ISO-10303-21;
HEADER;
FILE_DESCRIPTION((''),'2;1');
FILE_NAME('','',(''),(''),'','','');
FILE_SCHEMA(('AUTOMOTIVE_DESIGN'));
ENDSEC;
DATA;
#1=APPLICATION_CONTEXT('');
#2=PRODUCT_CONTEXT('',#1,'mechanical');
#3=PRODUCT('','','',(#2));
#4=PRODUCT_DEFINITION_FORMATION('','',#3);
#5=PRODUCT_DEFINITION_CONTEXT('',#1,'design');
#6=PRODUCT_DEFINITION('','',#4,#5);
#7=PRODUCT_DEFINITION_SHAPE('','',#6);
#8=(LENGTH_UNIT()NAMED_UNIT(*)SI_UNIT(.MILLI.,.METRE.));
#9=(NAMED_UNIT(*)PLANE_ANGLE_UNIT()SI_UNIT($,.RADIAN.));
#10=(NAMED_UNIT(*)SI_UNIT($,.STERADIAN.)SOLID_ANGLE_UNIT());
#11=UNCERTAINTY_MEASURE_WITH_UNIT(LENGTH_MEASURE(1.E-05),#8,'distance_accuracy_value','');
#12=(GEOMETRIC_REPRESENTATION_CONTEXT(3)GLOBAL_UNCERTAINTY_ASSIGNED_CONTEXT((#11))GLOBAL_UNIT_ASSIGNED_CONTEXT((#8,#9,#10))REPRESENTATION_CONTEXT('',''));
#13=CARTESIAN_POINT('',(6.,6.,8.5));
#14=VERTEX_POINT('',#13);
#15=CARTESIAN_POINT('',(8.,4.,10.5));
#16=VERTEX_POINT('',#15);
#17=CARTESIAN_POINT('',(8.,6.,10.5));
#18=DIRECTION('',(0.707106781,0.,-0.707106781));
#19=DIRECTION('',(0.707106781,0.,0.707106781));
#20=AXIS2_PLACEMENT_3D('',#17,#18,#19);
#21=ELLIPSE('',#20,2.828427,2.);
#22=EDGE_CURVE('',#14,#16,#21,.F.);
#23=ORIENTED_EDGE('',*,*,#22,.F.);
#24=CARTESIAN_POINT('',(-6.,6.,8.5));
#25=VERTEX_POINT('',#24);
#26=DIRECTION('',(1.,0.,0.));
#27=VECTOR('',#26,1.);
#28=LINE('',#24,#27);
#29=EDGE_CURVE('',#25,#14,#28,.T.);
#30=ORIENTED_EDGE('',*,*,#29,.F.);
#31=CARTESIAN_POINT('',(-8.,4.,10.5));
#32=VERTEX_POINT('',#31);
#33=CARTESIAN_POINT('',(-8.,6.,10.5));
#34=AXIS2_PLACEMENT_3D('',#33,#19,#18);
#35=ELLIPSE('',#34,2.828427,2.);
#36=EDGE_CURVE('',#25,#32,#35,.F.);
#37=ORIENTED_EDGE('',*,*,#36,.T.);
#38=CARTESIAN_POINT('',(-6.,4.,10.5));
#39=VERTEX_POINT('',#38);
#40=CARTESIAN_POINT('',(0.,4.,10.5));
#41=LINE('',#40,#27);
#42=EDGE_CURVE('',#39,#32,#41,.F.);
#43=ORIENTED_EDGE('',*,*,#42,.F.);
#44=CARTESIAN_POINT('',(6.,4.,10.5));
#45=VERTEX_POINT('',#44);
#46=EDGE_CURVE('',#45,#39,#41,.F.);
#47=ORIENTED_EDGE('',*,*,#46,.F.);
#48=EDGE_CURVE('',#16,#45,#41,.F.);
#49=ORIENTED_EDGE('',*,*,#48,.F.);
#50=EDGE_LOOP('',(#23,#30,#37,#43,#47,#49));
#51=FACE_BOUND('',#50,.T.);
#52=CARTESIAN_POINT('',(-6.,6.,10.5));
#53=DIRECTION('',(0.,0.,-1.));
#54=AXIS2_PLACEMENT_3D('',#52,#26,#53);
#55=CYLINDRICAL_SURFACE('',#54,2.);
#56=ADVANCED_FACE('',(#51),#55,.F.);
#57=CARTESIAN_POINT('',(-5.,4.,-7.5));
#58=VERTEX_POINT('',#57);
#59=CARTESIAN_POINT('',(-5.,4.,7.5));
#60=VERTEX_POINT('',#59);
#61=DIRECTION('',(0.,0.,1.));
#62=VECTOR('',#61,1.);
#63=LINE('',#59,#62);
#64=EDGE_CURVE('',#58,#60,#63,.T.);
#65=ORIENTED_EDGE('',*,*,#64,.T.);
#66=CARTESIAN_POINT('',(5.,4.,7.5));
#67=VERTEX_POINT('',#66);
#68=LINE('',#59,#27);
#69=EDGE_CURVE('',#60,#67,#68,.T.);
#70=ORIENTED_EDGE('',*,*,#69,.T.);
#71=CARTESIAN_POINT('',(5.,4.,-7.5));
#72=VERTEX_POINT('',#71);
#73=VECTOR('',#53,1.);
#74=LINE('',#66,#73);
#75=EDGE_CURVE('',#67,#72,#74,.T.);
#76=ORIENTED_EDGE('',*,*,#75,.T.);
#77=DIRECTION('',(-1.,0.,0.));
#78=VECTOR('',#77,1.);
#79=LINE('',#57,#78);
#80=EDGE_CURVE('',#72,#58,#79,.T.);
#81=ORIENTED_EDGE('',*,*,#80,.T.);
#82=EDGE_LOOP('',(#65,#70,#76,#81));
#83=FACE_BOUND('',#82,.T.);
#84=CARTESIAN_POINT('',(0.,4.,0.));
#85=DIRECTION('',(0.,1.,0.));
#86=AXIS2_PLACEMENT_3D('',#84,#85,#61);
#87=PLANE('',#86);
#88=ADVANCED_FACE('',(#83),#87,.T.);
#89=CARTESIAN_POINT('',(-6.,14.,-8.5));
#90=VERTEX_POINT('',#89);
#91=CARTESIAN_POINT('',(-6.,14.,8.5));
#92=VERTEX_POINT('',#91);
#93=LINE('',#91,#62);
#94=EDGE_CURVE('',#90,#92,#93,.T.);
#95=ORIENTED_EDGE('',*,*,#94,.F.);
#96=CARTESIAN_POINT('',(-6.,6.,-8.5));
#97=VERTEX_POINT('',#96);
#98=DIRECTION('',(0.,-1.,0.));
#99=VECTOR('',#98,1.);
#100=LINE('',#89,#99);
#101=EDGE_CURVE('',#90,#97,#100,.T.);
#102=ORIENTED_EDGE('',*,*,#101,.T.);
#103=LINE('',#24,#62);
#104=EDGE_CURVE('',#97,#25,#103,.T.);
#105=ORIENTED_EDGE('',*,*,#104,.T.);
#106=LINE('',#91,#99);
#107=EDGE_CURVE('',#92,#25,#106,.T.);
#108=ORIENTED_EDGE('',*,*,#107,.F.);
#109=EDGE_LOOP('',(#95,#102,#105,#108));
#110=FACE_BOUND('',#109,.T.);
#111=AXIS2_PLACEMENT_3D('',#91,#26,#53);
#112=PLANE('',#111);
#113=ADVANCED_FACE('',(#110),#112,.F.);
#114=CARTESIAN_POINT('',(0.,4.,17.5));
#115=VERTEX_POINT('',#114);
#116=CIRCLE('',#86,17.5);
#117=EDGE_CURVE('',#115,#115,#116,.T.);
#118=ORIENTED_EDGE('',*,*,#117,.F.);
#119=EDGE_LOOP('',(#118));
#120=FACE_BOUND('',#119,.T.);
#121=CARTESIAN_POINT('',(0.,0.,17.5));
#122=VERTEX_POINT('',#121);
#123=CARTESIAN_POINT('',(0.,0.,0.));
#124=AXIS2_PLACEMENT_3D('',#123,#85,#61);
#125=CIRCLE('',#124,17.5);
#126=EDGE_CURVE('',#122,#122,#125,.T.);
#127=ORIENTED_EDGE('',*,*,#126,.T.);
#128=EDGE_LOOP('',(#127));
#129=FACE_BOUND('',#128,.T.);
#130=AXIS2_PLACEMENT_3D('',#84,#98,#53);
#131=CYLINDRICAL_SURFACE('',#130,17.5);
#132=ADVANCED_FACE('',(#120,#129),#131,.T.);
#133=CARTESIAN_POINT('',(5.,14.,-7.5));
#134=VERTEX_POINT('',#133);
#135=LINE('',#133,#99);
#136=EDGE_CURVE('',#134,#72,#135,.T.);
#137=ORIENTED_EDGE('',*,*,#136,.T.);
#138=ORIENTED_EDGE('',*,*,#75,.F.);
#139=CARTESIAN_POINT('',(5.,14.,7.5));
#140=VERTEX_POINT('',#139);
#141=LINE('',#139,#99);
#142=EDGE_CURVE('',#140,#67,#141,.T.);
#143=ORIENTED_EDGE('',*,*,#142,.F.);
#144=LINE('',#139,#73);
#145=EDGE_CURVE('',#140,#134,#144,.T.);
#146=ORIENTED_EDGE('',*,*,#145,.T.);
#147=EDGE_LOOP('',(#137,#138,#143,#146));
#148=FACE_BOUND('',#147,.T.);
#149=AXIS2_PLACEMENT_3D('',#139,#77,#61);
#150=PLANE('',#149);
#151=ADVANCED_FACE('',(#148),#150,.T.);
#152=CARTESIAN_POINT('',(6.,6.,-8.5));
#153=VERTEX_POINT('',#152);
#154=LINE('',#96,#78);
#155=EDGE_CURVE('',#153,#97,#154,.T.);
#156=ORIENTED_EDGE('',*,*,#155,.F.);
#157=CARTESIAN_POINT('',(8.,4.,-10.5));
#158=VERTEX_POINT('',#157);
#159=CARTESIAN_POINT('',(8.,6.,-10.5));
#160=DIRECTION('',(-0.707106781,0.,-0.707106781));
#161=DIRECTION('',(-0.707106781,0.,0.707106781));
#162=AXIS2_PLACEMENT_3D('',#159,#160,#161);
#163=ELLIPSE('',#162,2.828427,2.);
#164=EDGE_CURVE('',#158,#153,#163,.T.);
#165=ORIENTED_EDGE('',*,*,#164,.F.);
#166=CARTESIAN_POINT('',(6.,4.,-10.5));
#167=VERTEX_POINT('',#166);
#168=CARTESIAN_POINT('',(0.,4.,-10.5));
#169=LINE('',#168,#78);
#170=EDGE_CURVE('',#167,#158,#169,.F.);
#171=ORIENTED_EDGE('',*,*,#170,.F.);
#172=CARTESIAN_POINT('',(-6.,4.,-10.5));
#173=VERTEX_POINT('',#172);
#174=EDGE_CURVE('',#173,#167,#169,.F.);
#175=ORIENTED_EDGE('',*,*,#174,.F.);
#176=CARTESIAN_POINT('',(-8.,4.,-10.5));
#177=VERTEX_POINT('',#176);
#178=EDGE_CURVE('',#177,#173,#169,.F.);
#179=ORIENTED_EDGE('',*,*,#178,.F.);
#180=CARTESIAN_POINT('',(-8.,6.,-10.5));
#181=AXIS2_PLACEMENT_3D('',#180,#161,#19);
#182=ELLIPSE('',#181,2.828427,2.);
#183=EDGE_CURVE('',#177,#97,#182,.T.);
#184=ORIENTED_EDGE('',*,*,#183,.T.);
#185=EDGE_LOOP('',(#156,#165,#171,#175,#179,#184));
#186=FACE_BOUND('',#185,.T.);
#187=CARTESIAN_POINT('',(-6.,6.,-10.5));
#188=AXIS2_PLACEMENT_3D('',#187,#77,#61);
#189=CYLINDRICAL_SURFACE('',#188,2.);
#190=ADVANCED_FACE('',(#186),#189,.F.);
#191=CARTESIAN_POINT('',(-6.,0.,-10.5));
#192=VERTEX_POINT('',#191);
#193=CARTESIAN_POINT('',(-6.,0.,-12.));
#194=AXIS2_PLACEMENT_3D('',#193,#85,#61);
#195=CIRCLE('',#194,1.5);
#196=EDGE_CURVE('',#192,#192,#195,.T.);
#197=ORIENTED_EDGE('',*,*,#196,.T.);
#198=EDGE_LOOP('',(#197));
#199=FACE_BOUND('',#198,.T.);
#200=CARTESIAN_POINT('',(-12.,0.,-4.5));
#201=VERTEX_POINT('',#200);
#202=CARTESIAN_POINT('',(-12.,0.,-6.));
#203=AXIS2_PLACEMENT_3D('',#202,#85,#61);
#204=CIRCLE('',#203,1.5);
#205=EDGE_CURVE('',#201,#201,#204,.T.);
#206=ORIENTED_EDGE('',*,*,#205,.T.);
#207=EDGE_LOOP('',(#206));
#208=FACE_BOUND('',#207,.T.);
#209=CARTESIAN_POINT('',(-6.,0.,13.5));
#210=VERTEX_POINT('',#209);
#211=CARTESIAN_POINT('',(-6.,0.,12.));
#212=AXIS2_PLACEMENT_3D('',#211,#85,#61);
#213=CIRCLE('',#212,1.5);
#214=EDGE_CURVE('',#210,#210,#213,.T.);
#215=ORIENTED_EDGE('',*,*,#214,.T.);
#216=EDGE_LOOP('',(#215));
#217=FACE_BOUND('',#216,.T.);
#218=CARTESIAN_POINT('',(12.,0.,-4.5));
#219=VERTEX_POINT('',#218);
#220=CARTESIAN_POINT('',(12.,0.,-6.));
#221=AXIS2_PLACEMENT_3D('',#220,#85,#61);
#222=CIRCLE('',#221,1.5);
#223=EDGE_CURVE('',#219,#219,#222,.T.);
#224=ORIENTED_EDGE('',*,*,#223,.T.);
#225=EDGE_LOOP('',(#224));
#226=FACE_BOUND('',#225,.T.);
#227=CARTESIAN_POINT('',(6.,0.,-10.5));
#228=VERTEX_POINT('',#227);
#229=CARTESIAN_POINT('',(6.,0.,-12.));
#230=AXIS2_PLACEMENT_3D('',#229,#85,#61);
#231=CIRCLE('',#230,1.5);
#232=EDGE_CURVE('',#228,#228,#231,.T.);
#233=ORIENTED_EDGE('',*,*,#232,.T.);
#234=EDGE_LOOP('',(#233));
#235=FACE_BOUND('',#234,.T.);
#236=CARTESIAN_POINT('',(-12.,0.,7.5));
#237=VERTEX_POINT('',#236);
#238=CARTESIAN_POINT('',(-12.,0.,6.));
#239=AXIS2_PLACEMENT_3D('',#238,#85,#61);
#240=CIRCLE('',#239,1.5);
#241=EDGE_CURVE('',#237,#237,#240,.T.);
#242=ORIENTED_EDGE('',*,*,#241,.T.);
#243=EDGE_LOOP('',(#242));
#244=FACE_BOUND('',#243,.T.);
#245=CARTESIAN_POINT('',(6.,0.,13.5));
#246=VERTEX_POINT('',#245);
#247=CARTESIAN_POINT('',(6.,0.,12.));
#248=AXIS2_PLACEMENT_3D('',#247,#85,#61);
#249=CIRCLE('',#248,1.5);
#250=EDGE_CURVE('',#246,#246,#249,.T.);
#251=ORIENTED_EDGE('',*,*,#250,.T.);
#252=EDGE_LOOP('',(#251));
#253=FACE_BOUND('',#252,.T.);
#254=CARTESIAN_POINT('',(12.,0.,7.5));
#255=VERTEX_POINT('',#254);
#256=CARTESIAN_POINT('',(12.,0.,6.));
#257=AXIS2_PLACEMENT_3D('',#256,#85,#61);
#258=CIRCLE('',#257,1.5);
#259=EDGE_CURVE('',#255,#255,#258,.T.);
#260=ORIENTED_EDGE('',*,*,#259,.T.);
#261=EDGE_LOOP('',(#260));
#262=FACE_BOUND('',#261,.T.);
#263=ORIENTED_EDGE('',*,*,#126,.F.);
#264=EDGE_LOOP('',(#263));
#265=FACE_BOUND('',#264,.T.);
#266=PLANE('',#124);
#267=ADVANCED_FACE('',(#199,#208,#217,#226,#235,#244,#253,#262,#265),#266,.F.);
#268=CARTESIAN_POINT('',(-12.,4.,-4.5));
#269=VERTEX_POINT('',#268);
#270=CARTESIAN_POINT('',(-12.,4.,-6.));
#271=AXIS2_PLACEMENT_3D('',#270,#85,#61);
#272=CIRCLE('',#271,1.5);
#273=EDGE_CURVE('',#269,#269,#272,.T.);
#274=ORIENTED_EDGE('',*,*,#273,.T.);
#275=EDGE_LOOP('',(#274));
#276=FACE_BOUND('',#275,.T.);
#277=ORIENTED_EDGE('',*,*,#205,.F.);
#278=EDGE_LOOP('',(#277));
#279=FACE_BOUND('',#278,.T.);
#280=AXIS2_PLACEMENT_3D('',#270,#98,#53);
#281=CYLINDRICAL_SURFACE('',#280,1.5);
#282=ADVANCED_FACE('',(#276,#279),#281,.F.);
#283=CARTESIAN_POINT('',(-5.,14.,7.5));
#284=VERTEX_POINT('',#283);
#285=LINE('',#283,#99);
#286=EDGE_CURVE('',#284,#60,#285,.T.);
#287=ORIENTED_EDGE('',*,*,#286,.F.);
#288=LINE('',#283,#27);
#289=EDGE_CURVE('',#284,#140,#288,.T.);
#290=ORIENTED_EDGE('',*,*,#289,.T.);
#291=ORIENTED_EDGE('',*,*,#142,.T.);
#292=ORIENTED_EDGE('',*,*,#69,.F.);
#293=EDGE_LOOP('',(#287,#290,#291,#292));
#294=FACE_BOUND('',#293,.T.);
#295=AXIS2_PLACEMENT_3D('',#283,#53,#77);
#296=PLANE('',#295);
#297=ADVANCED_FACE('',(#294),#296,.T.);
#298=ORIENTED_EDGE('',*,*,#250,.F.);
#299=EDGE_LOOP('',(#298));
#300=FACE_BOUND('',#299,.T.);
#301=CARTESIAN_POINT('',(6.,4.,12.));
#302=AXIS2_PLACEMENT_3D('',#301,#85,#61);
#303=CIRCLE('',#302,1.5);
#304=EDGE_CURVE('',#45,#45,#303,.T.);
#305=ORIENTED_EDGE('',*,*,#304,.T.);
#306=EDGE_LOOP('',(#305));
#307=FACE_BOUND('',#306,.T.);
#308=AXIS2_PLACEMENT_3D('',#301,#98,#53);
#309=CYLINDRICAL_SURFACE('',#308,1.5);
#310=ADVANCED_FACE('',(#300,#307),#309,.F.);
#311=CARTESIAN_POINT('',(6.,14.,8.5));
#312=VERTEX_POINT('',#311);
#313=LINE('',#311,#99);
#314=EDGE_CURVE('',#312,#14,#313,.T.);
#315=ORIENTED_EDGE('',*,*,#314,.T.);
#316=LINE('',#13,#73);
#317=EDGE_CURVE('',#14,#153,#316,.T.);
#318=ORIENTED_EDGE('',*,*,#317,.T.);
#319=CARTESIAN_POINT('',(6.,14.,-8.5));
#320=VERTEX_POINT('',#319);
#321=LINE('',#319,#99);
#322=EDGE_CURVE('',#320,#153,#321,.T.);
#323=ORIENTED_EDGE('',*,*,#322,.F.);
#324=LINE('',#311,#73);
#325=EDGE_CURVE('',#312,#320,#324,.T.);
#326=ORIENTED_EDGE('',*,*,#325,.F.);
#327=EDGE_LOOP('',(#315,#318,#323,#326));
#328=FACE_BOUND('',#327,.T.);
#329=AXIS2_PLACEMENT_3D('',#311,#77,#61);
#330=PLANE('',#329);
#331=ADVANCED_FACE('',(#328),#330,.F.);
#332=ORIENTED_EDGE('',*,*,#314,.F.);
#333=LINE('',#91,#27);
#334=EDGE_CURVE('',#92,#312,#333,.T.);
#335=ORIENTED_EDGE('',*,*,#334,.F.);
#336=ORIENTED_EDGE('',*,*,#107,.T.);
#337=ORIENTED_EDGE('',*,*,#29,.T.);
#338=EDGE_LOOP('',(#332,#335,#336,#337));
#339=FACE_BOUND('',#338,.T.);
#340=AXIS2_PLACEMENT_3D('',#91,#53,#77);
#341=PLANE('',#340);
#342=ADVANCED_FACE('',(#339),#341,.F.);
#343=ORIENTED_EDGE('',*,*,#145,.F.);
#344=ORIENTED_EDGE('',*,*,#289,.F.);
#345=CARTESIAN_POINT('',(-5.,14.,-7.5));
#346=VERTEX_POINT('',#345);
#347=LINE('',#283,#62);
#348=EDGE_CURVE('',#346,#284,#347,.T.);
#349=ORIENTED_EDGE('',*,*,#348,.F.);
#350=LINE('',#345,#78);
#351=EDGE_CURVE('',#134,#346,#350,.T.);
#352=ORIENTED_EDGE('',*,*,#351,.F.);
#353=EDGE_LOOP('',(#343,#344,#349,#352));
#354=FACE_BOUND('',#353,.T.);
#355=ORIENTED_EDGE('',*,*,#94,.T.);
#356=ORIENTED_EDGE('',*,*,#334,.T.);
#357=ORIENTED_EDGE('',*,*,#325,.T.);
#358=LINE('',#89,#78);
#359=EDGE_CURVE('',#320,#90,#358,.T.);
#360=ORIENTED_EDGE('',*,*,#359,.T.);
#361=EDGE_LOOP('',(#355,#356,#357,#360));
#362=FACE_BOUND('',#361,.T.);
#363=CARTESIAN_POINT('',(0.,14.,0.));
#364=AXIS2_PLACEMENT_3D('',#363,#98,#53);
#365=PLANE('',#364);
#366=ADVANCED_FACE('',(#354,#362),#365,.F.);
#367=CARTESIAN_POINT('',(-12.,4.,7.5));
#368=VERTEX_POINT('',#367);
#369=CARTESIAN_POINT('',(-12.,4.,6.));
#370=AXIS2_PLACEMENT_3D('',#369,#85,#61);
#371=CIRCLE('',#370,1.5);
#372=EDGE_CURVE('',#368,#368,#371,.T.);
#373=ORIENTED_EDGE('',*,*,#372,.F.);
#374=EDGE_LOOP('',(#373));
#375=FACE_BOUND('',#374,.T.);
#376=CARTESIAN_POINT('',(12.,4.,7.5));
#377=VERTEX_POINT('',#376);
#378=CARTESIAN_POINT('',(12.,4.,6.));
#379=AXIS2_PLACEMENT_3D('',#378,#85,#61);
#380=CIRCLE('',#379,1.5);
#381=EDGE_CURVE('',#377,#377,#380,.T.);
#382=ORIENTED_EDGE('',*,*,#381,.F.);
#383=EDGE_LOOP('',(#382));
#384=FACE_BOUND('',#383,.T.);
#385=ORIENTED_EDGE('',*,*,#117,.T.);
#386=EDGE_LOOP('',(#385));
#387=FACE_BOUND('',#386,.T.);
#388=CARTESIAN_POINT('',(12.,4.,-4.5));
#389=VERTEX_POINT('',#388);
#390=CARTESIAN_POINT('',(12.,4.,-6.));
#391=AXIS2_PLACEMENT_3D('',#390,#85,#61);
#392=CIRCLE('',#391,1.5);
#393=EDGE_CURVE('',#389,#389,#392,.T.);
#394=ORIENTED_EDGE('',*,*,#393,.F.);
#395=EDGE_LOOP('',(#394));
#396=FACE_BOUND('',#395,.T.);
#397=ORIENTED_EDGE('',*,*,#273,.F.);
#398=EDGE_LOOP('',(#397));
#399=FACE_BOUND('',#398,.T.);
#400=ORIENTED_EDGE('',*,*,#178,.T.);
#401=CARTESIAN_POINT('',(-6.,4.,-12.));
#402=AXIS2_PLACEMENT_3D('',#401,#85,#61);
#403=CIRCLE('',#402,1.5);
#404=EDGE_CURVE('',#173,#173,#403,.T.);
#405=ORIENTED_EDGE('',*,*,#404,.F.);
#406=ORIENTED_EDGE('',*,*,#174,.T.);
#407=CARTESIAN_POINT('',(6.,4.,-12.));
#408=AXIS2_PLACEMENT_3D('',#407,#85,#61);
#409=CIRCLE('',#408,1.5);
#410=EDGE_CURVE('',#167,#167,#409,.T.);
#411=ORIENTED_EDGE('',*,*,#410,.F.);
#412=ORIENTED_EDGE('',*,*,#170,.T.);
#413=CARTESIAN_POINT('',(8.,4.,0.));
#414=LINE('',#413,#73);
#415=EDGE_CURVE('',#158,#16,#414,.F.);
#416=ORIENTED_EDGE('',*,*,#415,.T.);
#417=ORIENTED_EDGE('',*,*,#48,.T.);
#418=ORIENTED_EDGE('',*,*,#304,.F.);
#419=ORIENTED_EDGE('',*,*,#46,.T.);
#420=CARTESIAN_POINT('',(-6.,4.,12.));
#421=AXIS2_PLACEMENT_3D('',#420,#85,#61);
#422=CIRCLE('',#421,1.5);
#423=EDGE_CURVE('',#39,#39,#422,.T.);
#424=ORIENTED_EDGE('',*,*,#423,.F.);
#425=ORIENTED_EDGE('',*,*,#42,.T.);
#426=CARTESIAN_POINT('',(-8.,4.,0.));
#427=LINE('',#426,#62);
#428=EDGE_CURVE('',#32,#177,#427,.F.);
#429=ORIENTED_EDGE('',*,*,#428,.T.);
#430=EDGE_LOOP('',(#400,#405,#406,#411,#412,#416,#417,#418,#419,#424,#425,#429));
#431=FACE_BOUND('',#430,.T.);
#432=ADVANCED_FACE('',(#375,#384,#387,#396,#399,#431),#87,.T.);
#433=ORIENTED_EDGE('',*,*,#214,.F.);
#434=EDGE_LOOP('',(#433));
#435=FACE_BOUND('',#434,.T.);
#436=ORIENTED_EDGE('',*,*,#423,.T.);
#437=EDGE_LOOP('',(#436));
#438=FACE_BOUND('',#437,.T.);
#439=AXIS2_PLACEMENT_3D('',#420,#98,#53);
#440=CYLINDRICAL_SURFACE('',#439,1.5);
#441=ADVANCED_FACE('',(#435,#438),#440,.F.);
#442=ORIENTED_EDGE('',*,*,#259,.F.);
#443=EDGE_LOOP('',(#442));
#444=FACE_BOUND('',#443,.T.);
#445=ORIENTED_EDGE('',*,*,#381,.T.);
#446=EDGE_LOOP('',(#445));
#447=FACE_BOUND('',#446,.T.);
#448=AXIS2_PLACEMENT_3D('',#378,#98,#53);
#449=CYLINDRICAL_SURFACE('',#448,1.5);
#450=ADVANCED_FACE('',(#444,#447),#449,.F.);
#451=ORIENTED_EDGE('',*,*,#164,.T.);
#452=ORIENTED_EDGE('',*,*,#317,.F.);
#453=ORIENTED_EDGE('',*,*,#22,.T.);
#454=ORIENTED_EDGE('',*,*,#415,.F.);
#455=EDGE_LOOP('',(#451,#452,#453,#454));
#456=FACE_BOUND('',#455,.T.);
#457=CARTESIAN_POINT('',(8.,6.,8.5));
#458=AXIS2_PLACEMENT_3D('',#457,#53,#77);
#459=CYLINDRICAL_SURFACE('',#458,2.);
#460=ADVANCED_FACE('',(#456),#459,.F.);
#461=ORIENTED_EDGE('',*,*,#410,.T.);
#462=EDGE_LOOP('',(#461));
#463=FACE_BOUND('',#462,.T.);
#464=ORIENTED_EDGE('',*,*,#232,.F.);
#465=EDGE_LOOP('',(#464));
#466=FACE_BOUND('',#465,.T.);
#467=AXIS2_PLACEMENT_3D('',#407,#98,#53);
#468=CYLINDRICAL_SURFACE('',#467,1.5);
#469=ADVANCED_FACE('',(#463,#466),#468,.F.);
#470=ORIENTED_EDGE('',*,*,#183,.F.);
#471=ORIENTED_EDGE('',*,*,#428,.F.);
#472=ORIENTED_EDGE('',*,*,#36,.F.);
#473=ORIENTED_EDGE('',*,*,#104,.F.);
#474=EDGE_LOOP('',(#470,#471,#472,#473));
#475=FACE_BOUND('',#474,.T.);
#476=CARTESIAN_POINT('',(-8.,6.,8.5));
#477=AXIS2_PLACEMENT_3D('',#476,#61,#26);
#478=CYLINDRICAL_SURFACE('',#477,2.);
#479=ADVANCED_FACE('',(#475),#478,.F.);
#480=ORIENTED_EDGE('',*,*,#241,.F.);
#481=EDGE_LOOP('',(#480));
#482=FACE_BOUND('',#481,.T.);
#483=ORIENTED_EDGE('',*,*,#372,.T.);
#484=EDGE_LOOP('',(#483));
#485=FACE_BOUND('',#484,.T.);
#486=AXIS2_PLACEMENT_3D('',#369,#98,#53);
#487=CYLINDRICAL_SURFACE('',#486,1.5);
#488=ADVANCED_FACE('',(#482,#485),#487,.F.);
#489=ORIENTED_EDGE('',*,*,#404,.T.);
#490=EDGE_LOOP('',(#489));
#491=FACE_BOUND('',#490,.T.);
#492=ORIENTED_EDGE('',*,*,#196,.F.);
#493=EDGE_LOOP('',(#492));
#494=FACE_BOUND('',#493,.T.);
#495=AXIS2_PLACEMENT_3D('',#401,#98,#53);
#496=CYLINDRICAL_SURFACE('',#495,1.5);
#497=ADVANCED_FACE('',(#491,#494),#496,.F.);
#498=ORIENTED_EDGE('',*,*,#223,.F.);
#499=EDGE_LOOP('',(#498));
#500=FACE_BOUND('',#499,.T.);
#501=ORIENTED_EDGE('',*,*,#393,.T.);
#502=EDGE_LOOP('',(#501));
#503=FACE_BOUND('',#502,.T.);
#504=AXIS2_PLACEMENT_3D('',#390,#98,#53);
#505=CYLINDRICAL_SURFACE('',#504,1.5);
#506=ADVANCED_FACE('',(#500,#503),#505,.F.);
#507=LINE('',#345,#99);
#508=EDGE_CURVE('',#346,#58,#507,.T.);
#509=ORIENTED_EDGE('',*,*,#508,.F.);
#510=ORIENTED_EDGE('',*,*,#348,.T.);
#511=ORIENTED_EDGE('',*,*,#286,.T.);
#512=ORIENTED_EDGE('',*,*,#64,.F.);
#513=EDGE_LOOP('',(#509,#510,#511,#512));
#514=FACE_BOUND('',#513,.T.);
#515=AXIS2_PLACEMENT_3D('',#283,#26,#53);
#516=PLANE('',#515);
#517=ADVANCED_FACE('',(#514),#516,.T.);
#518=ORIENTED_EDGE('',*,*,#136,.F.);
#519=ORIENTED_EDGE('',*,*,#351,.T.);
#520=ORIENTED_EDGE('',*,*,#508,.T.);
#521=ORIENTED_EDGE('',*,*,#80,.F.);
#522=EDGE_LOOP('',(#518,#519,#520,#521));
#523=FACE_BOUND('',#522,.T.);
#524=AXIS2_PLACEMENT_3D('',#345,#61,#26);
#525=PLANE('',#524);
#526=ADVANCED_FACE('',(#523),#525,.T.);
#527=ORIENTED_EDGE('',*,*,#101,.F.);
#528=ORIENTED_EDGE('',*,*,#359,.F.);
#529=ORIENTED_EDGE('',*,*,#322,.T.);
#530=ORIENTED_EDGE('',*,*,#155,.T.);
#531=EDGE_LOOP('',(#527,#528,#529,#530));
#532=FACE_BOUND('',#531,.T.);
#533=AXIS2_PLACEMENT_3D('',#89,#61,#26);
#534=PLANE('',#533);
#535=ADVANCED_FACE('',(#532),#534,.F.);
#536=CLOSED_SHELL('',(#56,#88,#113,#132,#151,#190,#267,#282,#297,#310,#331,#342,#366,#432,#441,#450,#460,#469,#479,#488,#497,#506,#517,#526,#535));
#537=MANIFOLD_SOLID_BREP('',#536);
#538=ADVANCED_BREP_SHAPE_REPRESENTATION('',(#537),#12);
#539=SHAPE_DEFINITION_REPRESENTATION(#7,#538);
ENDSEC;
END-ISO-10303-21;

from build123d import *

# Parameters (mm, degrees)
SKETCH1_R           = 17.5
SKETCH1_R_2         = 1.5
BOSS_EXTRUDE1_DEPTH = 4
SKETCH3_W           = 12
SKETCH3_H           = 17
SKETCH3_W_2         = 10
SKETCH3_H_2         = 15
BOSS_EXTRUDE2_DEPTH = 10
FILLET1_R           = 2


with BuildPart() as part:
    # Sketch1 → Boss-Extrude1 (new body)
    with BuildSketch(Plane(origin=(0, 0, 0), x_dir=(1, 0, 0), z_dir=(0, 1, 0))):
        with Locations(Location((0, 0, 0), (0, 0, 270))):
            Circle(SKETCH1_R)
        with Locations(Location((12, 6, 0), (0, 0, 270))):
            Circle(SKETCH1_R_2, mode=Mode.SUBTRACT)
        with Locations(Location((12, -6, 0), (0, 0, 270))):
            Circle(SKETCH1_R_2, mode=Mode.SUBTRACT)
        with Locations(Location((-12, 6, 0), (0, 0, 270))):
            Circle(SKETCH1_R_2, mode=Mode.SUBTRACT)
        with Locations(Location((-12, -6, 0), (0, 0, 270))):
            Circle(SKETCH1_R_2, mode=Mode.SUBTRACT)
        with Locations(Location((6, 12, 0), (0, 0, 270))):
            Circle(SKETCH1_R_2, mode=Mode.SUBTRACT)
        with Locations(Location((6, -12, 0), (0, 0, 270))):
            Circle(SKETCH1_R_2, mode=Mode.SUBTRACT)
        with Locations(Location((-6, -12, 0), (0, 0, 270))):
            Circle(SKETCH1_R_2, mode=Mode.SUBTRACT)
        with Locations(Location((-6, 12, 0), (0, 0, 270))):
            Circle(SKETCH1_R_2, mode=Mode.SUBTRACT)
    extrude(amount=BOSS_EXTRUDE1_DEPTH)

    # Sketch3 → Boss-Extrude2 (add)
    with BuildSketch(Plane(origin=(0, 4, 0), x_dir=(1, 0, 0), z_dir=(0, 1, 0))):
        Rectangle(SKETCH3_W, SKETCH3_H)
        Rectangle(SKETCH3_W_2, SKETCH3_H_2, mode=Mode.SUBTRACT)
    extrude(amount=BOSS_EXTRUDE2_DEPTH)

    # Fillet1
    fillet1_edges = [part.edges().sort_by_distance(p)[0] for p in [
        (-6, 4, 0),
        (0, 4, 8.5),
        (6, 4, 0),
        (0, 4, -8.5),
    ]]
    fillet(fillet1_edges, radius=FILLET1_R - 0.0001)  # a hair under: the kernel refuses the full size


solid = part.part
